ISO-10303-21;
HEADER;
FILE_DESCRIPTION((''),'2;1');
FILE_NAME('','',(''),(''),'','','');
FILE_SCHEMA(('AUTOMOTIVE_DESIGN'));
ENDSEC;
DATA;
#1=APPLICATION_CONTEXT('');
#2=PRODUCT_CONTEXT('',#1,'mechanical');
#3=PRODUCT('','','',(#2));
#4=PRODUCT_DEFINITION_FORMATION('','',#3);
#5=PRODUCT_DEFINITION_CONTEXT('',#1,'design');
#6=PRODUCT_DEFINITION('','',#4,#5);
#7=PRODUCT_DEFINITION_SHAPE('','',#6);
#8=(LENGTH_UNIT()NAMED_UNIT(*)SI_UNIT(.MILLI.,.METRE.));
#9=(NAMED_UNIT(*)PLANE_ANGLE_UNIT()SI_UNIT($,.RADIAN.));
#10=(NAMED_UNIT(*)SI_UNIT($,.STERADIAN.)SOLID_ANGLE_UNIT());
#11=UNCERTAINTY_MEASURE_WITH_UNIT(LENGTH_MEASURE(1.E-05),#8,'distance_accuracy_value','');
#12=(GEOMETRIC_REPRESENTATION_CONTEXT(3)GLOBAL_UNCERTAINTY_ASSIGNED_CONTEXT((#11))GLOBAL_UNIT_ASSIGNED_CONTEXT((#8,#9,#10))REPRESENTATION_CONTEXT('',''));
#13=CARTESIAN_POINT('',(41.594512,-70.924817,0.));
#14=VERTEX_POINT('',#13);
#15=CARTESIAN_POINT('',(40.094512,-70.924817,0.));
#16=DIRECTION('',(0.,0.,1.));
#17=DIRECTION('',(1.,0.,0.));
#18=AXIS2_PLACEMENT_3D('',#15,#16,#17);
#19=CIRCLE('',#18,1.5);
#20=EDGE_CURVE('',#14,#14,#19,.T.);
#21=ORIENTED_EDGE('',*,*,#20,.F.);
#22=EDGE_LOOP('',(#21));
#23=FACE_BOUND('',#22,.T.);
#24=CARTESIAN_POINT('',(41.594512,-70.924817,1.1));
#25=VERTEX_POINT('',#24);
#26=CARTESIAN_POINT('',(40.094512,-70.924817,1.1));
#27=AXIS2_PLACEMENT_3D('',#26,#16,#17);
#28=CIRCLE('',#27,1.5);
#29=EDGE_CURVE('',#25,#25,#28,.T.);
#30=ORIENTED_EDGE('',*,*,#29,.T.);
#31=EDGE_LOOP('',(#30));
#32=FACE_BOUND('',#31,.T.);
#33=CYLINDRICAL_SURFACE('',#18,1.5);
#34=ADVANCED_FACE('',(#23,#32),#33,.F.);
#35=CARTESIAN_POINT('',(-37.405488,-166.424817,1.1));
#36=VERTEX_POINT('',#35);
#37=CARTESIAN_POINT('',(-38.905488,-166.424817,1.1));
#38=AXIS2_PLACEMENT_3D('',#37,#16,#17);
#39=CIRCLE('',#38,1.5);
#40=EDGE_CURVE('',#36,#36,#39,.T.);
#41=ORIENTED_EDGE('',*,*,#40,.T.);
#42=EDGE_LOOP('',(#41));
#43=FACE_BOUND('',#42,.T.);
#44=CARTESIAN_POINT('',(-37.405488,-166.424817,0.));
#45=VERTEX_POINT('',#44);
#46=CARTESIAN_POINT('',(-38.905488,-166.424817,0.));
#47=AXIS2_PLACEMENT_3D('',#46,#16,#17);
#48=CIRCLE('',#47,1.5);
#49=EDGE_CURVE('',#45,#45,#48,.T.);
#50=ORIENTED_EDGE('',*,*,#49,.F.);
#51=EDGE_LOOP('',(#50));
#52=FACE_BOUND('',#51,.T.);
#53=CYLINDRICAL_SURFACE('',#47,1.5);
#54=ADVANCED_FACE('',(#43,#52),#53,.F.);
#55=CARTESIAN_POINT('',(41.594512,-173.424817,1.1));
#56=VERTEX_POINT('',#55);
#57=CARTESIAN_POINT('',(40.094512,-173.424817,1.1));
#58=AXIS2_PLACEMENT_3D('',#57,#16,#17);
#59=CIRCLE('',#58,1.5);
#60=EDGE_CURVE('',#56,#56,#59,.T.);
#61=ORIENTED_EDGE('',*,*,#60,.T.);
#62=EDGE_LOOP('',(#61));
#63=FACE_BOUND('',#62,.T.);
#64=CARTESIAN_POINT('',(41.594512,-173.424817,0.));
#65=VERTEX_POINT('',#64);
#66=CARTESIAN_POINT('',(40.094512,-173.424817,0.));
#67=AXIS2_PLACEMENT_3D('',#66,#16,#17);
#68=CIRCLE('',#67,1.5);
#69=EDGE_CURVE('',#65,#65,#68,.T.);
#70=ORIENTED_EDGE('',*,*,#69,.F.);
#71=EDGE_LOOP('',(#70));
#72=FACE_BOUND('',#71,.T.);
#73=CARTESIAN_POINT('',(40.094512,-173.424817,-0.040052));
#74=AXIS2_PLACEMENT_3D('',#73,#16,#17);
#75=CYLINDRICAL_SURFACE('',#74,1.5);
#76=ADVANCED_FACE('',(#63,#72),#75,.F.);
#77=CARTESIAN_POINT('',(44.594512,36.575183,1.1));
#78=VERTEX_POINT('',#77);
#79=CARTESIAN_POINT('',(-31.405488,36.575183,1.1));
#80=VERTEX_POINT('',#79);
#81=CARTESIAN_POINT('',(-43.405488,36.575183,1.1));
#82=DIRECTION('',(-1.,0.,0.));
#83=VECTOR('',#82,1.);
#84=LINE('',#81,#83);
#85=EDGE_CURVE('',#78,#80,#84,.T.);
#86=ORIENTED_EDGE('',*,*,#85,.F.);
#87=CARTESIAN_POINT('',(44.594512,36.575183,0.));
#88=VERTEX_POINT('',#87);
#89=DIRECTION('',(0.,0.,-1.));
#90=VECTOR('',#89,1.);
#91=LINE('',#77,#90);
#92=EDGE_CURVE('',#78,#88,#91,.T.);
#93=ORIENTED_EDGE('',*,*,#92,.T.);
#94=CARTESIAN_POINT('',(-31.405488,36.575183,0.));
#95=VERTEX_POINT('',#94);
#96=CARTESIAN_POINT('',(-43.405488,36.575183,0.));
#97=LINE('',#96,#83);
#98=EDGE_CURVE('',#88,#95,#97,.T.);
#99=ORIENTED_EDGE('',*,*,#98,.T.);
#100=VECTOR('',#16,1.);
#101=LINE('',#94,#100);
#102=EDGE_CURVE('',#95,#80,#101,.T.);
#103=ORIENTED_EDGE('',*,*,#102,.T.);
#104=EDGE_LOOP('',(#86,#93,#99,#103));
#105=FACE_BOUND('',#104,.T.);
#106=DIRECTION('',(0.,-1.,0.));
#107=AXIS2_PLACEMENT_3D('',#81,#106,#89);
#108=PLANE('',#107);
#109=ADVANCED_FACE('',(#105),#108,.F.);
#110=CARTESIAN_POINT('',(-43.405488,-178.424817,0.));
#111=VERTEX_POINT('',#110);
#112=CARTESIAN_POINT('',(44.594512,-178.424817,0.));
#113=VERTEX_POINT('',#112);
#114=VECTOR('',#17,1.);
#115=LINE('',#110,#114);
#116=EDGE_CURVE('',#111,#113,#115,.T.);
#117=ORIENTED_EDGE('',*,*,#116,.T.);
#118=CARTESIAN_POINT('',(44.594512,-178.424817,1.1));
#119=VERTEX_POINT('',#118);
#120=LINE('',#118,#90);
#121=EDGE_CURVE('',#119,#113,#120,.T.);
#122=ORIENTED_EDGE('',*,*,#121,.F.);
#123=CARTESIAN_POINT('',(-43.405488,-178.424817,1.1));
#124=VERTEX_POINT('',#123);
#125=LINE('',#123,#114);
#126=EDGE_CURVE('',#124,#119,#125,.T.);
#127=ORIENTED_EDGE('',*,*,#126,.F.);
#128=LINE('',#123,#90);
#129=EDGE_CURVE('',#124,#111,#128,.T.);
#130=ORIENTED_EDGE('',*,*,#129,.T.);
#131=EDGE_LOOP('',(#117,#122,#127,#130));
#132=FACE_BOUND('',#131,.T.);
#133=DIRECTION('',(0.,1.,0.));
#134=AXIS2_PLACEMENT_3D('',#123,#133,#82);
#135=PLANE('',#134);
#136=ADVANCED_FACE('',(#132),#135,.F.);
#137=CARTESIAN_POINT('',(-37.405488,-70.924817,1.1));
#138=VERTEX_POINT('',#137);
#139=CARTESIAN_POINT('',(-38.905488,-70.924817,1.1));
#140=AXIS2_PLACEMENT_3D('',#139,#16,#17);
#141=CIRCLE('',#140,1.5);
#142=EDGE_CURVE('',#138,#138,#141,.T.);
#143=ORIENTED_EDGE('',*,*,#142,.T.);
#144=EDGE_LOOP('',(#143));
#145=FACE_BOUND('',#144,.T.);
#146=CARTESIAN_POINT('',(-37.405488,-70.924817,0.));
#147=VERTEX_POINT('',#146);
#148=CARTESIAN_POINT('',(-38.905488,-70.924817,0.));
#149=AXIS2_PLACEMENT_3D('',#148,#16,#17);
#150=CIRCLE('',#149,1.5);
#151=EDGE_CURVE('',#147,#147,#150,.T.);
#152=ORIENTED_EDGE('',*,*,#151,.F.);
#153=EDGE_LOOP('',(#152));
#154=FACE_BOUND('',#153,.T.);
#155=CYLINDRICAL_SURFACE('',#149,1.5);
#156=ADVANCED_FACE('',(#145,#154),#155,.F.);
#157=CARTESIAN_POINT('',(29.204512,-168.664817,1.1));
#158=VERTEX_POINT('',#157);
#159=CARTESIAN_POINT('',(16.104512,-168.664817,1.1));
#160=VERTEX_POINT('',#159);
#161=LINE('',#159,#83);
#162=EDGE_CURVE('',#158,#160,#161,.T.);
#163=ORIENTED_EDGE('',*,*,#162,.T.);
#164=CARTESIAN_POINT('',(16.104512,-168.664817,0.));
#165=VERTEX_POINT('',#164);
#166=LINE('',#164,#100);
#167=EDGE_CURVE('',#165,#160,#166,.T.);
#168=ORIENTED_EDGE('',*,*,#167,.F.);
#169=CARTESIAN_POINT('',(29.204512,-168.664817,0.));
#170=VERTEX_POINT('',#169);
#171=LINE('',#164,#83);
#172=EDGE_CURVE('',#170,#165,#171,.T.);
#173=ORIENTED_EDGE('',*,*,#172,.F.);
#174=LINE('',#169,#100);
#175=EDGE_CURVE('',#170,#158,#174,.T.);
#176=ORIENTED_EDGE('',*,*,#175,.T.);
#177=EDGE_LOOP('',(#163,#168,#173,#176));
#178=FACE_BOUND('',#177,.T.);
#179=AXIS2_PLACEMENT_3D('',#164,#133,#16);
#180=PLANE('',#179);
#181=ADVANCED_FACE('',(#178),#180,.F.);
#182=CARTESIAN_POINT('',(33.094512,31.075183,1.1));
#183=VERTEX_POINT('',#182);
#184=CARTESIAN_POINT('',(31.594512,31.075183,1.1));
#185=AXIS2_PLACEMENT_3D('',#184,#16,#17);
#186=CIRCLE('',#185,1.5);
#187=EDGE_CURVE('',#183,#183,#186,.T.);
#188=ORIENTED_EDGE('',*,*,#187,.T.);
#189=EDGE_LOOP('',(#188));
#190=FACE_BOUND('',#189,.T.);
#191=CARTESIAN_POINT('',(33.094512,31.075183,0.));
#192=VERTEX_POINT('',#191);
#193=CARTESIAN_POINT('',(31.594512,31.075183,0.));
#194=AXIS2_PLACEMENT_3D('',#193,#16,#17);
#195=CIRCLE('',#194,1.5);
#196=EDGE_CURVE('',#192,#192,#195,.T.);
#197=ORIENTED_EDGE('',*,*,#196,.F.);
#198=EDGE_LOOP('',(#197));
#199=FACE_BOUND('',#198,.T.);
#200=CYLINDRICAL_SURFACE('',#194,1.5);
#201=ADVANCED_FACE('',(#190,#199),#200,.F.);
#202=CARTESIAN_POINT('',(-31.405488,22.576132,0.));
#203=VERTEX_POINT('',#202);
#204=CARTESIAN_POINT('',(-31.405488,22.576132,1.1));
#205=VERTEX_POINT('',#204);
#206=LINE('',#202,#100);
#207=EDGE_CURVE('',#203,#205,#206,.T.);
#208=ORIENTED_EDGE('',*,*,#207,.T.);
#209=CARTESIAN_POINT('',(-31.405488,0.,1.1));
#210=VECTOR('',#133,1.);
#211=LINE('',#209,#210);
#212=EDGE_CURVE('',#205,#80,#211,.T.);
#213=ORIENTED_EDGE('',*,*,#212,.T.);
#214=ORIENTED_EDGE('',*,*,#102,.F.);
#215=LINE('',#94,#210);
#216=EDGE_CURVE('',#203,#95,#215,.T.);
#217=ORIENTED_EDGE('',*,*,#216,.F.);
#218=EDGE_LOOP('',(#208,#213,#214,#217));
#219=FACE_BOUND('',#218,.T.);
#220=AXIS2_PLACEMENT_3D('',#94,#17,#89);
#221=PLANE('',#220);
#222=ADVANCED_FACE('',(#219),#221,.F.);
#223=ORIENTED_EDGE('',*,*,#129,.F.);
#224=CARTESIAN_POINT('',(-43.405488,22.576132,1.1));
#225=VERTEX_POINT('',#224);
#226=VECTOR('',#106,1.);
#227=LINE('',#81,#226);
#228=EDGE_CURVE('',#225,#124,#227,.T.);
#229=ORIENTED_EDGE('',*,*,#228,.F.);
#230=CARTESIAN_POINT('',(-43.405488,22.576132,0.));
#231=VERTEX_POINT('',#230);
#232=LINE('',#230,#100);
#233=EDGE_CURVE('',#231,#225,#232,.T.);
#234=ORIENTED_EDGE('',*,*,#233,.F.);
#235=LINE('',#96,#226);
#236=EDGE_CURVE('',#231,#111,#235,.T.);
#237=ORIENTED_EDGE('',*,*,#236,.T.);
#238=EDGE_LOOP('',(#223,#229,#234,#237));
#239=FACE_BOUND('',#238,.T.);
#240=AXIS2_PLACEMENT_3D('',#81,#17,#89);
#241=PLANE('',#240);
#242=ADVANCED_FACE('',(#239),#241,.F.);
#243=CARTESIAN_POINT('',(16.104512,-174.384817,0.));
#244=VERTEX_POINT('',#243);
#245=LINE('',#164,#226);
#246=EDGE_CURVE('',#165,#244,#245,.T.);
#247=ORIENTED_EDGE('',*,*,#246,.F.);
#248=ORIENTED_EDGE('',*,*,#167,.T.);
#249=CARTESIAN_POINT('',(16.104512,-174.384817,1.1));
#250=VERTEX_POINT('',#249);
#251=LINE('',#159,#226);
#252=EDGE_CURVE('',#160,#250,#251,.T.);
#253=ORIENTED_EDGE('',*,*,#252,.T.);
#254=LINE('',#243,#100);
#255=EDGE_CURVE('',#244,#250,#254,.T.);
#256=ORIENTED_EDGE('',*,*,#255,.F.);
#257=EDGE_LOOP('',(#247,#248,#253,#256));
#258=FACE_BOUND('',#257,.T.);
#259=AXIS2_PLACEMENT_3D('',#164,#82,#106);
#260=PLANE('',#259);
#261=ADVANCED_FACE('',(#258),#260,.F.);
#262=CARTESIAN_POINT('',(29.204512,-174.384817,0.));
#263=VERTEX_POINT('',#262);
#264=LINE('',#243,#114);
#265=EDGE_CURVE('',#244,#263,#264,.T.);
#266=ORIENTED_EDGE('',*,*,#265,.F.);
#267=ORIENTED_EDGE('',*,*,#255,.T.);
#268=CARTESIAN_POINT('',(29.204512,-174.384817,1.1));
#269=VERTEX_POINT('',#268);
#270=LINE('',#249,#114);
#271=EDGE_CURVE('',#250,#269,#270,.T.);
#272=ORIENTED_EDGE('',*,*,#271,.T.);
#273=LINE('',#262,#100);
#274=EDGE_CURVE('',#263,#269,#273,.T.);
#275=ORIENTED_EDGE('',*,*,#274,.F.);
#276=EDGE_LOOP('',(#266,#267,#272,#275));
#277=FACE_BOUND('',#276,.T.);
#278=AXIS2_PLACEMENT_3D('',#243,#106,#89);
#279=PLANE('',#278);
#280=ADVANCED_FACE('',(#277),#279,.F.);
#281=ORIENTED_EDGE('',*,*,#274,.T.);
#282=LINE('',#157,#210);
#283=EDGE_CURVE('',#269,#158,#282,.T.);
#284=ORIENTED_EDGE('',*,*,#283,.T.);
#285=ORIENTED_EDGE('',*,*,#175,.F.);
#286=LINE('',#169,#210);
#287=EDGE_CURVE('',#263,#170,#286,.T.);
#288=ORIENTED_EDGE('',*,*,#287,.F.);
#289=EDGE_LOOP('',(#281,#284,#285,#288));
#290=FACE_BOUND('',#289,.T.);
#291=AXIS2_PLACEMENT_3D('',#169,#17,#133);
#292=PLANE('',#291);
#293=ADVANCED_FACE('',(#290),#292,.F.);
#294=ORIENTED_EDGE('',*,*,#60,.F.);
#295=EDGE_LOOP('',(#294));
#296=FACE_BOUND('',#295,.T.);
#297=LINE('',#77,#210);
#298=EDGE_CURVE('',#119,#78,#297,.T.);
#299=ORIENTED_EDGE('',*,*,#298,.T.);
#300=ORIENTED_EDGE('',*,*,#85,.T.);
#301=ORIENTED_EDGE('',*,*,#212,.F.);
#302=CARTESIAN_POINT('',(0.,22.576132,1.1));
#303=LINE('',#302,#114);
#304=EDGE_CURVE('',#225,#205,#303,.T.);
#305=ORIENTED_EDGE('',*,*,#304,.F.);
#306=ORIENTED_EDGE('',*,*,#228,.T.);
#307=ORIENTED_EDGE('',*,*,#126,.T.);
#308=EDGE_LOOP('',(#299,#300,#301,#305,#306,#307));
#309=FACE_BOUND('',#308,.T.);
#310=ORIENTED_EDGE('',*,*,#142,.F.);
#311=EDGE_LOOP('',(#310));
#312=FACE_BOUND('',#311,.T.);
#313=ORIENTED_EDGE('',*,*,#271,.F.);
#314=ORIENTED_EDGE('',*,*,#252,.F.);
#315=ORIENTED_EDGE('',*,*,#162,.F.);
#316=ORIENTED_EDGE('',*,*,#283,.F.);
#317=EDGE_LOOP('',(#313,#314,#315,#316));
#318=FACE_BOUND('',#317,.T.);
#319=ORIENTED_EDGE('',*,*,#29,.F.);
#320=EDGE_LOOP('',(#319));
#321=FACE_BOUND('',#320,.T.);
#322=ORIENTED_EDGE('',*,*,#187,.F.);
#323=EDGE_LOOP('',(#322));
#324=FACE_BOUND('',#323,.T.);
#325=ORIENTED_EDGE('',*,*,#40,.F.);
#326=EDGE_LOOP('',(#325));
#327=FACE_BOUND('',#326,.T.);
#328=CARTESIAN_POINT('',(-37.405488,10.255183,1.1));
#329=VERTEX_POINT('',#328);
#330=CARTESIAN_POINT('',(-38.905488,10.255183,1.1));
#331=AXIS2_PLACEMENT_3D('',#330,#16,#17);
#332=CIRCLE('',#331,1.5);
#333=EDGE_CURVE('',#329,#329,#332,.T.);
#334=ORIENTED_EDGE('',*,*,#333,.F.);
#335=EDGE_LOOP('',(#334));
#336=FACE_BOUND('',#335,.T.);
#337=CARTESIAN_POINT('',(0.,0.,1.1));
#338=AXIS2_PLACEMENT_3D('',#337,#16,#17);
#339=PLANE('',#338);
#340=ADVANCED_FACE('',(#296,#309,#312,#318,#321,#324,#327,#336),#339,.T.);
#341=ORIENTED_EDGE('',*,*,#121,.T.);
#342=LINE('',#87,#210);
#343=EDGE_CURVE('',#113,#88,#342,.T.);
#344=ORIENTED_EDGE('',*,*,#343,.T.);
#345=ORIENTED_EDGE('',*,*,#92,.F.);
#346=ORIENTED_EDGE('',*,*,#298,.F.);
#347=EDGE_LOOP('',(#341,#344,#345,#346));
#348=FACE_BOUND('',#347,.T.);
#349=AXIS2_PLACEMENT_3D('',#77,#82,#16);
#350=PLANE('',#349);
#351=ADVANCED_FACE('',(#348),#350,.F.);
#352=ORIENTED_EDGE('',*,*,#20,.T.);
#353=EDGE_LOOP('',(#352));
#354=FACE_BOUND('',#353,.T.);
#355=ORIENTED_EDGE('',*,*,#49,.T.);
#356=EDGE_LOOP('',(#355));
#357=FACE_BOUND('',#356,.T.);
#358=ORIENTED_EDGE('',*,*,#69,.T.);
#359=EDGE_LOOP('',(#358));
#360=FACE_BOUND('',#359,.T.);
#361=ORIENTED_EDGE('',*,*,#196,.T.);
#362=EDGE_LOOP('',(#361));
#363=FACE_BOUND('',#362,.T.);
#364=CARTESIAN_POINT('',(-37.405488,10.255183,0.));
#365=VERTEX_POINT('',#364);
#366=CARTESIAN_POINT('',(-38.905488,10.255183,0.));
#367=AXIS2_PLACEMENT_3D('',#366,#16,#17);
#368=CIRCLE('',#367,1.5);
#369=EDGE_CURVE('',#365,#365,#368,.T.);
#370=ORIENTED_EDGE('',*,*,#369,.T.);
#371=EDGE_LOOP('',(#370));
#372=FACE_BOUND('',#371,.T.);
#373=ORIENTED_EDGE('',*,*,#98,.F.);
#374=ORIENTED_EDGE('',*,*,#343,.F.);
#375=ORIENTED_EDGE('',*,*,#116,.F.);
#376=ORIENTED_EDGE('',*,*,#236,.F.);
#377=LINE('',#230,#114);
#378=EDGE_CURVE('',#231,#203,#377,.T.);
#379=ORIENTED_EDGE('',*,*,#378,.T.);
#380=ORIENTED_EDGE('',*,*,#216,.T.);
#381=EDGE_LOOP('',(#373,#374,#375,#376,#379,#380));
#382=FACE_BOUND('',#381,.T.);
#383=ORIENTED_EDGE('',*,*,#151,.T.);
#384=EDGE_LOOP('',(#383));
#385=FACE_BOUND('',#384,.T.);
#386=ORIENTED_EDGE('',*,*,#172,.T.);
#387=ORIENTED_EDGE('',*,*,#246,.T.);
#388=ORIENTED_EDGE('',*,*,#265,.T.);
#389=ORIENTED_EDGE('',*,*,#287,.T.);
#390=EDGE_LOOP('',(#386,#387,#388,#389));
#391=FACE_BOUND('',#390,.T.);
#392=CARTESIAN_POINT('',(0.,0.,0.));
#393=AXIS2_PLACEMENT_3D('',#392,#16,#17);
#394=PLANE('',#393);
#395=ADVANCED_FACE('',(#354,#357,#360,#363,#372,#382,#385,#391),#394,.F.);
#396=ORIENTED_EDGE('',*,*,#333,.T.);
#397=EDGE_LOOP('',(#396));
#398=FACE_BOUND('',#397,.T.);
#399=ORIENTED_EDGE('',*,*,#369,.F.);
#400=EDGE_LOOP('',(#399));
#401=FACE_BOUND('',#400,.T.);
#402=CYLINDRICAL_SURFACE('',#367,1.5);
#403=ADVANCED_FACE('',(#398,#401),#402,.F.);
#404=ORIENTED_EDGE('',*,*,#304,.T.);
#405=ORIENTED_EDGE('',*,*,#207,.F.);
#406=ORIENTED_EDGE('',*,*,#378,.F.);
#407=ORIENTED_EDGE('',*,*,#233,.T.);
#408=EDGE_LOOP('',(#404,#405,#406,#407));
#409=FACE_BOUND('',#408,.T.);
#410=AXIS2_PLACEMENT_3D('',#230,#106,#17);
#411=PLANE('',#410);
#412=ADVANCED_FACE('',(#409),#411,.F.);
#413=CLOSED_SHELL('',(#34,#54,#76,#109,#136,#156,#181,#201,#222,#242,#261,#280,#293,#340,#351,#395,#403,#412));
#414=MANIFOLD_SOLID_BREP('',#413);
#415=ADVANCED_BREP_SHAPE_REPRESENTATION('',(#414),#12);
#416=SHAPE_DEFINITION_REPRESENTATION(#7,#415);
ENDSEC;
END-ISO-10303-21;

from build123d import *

# Parameters (mm, degrees)
SKETCH3_W              = 88
SKETCH3_H              = 215
BOSS_EXTRUDE3_DEPTH    = 1.1
CUT_EXTRUDE1_OUTLINE_W = 12
CUT_EXTRUDE1_OUTLINE_H = 13.99905087
CUT_EXTRUDE1_OUTLINE_R = 1.5
CUT_EXTRUDE1_DEPTH     = 1.1
SKETCH5_W              = 13.1
SKETCH5_H              = 5.72
CUT_EXTRUDE3_DEPTH     = 1.1


# Read off the part's stored shape, not the designer's step: Cut-Extrude1
with BuildPart() as part:
    # Sketch3 → Boss-Extrude3 (new body)
    with BuildSketch(Plane.XY):
        with Locations((0.594511969, -70.924817192)):
            Rectangle(SKETCH3_W, SKETCH3_H)
    extrude(amount=BOSS_EXTRUDE3_DEPTH)

    # Cut-Extrude1 outline → Cut-Extrude1 (cut)
    with BuildSketch(Plane.XY):
        with Locations((-37.405488031, 29.575657373)):
            Rectangle(CUT_EXTRUDE1_OUTLINE_W, CUT_EXTRUDE1_OUTLINE_H)
        with Locations((31.594511969, 31.075182808)):
            Circle(CUT_EXTRUDE1_OUTLINE_R)
        with Locations((-38.905488031, -166.424817192)):
            Circle(CUT_EXTRUDE1_OUTLINE_R)
        with Locations((-38.905488031, -70.924817192)):
            Circle(CUT_EXTRUDE1_OUTLINE_R)
        with Locations((-38.905488031, 10.255182808)):
            Circle(CUT_EXTRUDE1_OUTLINE_R)
        with Locations((40.094511969, -70.924817192)):
            Circle(CUT_EXTRUDE1_OUTLINE_R)
        with Locations((40.094511969, -173.424817192)):
            Circle(CUT_EXTRUDE1_OUTLINE_R)
    extrude(amount=CUT_EXTRUDE1_DEPTH, mode=Mode.SUBTRACT)

    # Sketch5 → Cut-Extrude3 (cut)
    with BuildSketch(Plane.XY.offset(1.1)):
        with Locations((22.654511969, -171.524817192)):
            Rectangle(SKETCH5_W, SKETCH5_H)
    extrude(amount=-CUT_EXTRUDE3_DEPTH, mode=Mode.SUBTRACT)


solid = part.part
